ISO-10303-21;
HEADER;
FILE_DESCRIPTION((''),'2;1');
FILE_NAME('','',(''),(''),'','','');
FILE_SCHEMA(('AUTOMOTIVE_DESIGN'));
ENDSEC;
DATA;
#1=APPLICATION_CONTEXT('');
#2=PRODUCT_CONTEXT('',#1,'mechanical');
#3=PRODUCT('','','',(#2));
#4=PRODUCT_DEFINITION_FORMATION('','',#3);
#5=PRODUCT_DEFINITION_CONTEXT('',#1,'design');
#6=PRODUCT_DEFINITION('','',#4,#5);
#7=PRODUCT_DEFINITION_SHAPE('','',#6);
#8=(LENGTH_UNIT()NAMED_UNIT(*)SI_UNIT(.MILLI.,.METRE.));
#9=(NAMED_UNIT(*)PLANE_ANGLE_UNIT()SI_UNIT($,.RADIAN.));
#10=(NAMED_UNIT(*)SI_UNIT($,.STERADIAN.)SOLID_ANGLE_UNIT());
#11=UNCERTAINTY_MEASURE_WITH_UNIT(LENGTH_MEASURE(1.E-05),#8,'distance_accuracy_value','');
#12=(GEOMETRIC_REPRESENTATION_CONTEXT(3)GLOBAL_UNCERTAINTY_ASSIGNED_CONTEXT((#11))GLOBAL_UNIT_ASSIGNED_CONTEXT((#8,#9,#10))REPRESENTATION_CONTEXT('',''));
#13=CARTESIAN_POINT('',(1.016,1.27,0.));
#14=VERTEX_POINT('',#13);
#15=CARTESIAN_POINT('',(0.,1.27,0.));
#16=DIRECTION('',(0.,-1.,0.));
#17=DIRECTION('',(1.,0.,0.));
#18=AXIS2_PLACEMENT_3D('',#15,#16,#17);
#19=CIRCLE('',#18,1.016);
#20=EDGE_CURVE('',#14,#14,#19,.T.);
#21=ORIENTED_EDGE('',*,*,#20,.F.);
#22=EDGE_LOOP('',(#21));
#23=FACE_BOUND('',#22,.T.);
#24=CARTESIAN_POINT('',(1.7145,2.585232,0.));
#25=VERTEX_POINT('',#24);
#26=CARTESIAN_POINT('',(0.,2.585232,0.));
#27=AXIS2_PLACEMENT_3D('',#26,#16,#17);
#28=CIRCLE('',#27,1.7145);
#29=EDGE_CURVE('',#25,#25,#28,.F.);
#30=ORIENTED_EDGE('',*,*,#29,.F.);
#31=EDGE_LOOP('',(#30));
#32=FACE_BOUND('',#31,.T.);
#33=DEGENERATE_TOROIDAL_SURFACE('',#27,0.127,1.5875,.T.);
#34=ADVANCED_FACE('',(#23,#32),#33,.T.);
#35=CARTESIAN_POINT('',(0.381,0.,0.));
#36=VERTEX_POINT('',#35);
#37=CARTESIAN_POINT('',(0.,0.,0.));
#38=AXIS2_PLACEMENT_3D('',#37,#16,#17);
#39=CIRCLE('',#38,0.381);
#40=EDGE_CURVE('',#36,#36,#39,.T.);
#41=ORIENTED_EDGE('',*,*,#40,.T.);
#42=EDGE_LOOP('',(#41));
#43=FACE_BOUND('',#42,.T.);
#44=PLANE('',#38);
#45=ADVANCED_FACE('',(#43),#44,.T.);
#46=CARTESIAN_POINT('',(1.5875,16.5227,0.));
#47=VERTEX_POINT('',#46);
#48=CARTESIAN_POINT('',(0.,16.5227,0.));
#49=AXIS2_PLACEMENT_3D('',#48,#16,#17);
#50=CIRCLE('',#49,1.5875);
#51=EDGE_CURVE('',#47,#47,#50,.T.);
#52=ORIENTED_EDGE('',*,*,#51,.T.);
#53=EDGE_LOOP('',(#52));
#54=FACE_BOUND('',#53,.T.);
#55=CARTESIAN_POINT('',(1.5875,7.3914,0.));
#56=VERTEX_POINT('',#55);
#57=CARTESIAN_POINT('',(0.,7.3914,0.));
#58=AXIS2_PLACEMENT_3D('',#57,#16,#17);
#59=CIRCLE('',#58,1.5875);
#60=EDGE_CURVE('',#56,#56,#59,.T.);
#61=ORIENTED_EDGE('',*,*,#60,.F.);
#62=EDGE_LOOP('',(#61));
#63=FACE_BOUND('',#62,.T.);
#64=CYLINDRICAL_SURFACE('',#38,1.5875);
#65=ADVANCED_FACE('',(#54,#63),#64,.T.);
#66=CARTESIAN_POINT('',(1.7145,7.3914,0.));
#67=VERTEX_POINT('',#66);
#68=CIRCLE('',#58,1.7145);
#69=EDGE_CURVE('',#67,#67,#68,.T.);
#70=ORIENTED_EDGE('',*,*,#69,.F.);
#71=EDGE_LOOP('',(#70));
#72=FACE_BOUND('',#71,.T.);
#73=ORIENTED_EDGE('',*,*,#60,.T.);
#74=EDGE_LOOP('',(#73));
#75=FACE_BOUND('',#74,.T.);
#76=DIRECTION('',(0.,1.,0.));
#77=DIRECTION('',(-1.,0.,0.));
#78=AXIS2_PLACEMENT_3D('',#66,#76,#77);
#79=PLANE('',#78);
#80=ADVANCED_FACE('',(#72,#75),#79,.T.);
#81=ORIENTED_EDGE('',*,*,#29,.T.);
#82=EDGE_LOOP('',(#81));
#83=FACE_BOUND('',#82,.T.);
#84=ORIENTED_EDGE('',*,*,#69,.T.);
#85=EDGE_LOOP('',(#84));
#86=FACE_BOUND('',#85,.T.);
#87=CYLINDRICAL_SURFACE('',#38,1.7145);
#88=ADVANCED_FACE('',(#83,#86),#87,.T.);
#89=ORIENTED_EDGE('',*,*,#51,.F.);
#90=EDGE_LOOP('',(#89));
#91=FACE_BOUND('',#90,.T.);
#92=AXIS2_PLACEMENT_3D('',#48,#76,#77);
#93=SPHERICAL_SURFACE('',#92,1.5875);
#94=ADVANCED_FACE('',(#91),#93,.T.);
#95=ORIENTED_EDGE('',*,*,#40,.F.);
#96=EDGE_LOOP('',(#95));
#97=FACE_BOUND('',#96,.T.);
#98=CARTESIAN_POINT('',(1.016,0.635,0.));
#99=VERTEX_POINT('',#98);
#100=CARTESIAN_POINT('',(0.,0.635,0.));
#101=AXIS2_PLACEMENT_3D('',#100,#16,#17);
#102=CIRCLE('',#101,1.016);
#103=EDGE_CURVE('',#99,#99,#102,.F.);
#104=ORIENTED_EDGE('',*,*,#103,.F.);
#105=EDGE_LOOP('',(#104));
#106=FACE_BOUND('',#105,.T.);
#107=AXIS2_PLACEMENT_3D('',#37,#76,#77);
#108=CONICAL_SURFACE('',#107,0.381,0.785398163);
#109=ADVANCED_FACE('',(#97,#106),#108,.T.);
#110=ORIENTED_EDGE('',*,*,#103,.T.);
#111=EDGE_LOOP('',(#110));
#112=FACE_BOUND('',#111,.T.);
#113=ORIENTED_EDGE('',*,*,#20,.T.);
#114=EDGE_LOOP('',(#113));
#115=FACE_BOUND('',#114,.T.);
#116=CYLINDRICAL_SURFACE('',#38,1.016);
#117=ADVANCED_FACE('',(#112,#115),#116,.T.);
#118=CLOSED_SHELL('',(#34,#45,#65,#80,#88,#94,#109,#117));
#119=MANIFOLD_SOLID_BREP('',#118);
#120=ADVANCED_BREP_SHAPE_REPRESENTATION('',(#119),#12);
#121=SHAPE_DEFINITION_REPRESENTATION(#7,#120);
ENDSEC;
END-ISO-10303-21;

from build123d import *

# Parameters (mm, degrees)
FILLET1_R     = 1.5875
CHAMFER1_SIZE = 0.635


with BuildPart() as part:
    # Sketch1 → Revolve1 (revolve)
    with BuildSketch(Plane.XY):
        Polygon((0, 0), (1.016, 0), (1.016, 1.27), (1.7145, 1.27), (1.7145, 7.3914), (1.5875, 7.3914), (1.5875, 18.1102), (0, 18.1102), align=None)
    revolve(axis=Axis((0, 0, 0), (0, 1, 0)))

    # Fillet1
    # the kernel refuses this fillet: 1.5875 mm, written as the material it takes off along each edge
    with BuildSketch(Plane(origin=(0, 18.1102, 0), x_dir=(1, 0, 0), z_dir=(0, 0, 1))) as fillet1_piece_1:
        with BuildLine():
            CenterArc((1.5875 - FILLET1_R, -FILLET1_R), FILLET1_R, 0, 90)
            Line((1.5875 - FILLET1_R, 0), (1.5875 - FILLET1_R, FILLET1_R * 0.02))
            Line((1.5875 - FILLET1_R, FILLET1_R * 0.02), (1.5875, FILLET1_R * 0.02))
            Line((1.5875, FILLET1_R * 0.02), (1.5875 + FILLET1_R * 0.02, 0))
            Line((1.5875 + FILLET1_R * 0.02, 0), (1.5875 + FILLET1_R * 0.02, -FILLET1_R))
            Line((1.5875 + FILLET1_R * 0.02, -FILLET1_R), (1.5875, -FILLET1_R))
        make_face()
    revolve(axis=Axis((0, 18.1102, 0), (0, 1, 0)), mode=Mode.SUBTRACT)
    with BuildSketch(Plane(origin=(0, 1.27, 0), x_dir=(1, 0, 0), z_dir=(0, 0, 1))) as fillet1_piece_2:
        with BuildLine():
            CenterArc((0.127, 1.315232014), FILLET1_R, 304.055797743, 55.944202257)
            Line((1.7145, 1.315232014), (1.74625, 1.315232014))
            Line((1.74625, 1.315232014), (1.74625, 0))
            Line((1.74625, 0), (1.7145, -0.03175))
            ThreePointArc((1.7145, -0.03175), (1.36525, -0.03175), (1.03378, -0.02630464))
            Line((1.03378, -0.02630464), (1.016, 0))
        make_face()
    revolve(axis=Axis((0, 1.27, 0), (0, 1, 0)), mode=Mode.SUBTRACT)

    # Chamfer1
    chamfer1_edges = [part.edges().sort_by_distance(p)[0] for p in [
        (-1.016, 0, 0),
    ]]
    chamfer(chamfer1_edges, length=CHAMFER1_SIZE)


solid = part.part
